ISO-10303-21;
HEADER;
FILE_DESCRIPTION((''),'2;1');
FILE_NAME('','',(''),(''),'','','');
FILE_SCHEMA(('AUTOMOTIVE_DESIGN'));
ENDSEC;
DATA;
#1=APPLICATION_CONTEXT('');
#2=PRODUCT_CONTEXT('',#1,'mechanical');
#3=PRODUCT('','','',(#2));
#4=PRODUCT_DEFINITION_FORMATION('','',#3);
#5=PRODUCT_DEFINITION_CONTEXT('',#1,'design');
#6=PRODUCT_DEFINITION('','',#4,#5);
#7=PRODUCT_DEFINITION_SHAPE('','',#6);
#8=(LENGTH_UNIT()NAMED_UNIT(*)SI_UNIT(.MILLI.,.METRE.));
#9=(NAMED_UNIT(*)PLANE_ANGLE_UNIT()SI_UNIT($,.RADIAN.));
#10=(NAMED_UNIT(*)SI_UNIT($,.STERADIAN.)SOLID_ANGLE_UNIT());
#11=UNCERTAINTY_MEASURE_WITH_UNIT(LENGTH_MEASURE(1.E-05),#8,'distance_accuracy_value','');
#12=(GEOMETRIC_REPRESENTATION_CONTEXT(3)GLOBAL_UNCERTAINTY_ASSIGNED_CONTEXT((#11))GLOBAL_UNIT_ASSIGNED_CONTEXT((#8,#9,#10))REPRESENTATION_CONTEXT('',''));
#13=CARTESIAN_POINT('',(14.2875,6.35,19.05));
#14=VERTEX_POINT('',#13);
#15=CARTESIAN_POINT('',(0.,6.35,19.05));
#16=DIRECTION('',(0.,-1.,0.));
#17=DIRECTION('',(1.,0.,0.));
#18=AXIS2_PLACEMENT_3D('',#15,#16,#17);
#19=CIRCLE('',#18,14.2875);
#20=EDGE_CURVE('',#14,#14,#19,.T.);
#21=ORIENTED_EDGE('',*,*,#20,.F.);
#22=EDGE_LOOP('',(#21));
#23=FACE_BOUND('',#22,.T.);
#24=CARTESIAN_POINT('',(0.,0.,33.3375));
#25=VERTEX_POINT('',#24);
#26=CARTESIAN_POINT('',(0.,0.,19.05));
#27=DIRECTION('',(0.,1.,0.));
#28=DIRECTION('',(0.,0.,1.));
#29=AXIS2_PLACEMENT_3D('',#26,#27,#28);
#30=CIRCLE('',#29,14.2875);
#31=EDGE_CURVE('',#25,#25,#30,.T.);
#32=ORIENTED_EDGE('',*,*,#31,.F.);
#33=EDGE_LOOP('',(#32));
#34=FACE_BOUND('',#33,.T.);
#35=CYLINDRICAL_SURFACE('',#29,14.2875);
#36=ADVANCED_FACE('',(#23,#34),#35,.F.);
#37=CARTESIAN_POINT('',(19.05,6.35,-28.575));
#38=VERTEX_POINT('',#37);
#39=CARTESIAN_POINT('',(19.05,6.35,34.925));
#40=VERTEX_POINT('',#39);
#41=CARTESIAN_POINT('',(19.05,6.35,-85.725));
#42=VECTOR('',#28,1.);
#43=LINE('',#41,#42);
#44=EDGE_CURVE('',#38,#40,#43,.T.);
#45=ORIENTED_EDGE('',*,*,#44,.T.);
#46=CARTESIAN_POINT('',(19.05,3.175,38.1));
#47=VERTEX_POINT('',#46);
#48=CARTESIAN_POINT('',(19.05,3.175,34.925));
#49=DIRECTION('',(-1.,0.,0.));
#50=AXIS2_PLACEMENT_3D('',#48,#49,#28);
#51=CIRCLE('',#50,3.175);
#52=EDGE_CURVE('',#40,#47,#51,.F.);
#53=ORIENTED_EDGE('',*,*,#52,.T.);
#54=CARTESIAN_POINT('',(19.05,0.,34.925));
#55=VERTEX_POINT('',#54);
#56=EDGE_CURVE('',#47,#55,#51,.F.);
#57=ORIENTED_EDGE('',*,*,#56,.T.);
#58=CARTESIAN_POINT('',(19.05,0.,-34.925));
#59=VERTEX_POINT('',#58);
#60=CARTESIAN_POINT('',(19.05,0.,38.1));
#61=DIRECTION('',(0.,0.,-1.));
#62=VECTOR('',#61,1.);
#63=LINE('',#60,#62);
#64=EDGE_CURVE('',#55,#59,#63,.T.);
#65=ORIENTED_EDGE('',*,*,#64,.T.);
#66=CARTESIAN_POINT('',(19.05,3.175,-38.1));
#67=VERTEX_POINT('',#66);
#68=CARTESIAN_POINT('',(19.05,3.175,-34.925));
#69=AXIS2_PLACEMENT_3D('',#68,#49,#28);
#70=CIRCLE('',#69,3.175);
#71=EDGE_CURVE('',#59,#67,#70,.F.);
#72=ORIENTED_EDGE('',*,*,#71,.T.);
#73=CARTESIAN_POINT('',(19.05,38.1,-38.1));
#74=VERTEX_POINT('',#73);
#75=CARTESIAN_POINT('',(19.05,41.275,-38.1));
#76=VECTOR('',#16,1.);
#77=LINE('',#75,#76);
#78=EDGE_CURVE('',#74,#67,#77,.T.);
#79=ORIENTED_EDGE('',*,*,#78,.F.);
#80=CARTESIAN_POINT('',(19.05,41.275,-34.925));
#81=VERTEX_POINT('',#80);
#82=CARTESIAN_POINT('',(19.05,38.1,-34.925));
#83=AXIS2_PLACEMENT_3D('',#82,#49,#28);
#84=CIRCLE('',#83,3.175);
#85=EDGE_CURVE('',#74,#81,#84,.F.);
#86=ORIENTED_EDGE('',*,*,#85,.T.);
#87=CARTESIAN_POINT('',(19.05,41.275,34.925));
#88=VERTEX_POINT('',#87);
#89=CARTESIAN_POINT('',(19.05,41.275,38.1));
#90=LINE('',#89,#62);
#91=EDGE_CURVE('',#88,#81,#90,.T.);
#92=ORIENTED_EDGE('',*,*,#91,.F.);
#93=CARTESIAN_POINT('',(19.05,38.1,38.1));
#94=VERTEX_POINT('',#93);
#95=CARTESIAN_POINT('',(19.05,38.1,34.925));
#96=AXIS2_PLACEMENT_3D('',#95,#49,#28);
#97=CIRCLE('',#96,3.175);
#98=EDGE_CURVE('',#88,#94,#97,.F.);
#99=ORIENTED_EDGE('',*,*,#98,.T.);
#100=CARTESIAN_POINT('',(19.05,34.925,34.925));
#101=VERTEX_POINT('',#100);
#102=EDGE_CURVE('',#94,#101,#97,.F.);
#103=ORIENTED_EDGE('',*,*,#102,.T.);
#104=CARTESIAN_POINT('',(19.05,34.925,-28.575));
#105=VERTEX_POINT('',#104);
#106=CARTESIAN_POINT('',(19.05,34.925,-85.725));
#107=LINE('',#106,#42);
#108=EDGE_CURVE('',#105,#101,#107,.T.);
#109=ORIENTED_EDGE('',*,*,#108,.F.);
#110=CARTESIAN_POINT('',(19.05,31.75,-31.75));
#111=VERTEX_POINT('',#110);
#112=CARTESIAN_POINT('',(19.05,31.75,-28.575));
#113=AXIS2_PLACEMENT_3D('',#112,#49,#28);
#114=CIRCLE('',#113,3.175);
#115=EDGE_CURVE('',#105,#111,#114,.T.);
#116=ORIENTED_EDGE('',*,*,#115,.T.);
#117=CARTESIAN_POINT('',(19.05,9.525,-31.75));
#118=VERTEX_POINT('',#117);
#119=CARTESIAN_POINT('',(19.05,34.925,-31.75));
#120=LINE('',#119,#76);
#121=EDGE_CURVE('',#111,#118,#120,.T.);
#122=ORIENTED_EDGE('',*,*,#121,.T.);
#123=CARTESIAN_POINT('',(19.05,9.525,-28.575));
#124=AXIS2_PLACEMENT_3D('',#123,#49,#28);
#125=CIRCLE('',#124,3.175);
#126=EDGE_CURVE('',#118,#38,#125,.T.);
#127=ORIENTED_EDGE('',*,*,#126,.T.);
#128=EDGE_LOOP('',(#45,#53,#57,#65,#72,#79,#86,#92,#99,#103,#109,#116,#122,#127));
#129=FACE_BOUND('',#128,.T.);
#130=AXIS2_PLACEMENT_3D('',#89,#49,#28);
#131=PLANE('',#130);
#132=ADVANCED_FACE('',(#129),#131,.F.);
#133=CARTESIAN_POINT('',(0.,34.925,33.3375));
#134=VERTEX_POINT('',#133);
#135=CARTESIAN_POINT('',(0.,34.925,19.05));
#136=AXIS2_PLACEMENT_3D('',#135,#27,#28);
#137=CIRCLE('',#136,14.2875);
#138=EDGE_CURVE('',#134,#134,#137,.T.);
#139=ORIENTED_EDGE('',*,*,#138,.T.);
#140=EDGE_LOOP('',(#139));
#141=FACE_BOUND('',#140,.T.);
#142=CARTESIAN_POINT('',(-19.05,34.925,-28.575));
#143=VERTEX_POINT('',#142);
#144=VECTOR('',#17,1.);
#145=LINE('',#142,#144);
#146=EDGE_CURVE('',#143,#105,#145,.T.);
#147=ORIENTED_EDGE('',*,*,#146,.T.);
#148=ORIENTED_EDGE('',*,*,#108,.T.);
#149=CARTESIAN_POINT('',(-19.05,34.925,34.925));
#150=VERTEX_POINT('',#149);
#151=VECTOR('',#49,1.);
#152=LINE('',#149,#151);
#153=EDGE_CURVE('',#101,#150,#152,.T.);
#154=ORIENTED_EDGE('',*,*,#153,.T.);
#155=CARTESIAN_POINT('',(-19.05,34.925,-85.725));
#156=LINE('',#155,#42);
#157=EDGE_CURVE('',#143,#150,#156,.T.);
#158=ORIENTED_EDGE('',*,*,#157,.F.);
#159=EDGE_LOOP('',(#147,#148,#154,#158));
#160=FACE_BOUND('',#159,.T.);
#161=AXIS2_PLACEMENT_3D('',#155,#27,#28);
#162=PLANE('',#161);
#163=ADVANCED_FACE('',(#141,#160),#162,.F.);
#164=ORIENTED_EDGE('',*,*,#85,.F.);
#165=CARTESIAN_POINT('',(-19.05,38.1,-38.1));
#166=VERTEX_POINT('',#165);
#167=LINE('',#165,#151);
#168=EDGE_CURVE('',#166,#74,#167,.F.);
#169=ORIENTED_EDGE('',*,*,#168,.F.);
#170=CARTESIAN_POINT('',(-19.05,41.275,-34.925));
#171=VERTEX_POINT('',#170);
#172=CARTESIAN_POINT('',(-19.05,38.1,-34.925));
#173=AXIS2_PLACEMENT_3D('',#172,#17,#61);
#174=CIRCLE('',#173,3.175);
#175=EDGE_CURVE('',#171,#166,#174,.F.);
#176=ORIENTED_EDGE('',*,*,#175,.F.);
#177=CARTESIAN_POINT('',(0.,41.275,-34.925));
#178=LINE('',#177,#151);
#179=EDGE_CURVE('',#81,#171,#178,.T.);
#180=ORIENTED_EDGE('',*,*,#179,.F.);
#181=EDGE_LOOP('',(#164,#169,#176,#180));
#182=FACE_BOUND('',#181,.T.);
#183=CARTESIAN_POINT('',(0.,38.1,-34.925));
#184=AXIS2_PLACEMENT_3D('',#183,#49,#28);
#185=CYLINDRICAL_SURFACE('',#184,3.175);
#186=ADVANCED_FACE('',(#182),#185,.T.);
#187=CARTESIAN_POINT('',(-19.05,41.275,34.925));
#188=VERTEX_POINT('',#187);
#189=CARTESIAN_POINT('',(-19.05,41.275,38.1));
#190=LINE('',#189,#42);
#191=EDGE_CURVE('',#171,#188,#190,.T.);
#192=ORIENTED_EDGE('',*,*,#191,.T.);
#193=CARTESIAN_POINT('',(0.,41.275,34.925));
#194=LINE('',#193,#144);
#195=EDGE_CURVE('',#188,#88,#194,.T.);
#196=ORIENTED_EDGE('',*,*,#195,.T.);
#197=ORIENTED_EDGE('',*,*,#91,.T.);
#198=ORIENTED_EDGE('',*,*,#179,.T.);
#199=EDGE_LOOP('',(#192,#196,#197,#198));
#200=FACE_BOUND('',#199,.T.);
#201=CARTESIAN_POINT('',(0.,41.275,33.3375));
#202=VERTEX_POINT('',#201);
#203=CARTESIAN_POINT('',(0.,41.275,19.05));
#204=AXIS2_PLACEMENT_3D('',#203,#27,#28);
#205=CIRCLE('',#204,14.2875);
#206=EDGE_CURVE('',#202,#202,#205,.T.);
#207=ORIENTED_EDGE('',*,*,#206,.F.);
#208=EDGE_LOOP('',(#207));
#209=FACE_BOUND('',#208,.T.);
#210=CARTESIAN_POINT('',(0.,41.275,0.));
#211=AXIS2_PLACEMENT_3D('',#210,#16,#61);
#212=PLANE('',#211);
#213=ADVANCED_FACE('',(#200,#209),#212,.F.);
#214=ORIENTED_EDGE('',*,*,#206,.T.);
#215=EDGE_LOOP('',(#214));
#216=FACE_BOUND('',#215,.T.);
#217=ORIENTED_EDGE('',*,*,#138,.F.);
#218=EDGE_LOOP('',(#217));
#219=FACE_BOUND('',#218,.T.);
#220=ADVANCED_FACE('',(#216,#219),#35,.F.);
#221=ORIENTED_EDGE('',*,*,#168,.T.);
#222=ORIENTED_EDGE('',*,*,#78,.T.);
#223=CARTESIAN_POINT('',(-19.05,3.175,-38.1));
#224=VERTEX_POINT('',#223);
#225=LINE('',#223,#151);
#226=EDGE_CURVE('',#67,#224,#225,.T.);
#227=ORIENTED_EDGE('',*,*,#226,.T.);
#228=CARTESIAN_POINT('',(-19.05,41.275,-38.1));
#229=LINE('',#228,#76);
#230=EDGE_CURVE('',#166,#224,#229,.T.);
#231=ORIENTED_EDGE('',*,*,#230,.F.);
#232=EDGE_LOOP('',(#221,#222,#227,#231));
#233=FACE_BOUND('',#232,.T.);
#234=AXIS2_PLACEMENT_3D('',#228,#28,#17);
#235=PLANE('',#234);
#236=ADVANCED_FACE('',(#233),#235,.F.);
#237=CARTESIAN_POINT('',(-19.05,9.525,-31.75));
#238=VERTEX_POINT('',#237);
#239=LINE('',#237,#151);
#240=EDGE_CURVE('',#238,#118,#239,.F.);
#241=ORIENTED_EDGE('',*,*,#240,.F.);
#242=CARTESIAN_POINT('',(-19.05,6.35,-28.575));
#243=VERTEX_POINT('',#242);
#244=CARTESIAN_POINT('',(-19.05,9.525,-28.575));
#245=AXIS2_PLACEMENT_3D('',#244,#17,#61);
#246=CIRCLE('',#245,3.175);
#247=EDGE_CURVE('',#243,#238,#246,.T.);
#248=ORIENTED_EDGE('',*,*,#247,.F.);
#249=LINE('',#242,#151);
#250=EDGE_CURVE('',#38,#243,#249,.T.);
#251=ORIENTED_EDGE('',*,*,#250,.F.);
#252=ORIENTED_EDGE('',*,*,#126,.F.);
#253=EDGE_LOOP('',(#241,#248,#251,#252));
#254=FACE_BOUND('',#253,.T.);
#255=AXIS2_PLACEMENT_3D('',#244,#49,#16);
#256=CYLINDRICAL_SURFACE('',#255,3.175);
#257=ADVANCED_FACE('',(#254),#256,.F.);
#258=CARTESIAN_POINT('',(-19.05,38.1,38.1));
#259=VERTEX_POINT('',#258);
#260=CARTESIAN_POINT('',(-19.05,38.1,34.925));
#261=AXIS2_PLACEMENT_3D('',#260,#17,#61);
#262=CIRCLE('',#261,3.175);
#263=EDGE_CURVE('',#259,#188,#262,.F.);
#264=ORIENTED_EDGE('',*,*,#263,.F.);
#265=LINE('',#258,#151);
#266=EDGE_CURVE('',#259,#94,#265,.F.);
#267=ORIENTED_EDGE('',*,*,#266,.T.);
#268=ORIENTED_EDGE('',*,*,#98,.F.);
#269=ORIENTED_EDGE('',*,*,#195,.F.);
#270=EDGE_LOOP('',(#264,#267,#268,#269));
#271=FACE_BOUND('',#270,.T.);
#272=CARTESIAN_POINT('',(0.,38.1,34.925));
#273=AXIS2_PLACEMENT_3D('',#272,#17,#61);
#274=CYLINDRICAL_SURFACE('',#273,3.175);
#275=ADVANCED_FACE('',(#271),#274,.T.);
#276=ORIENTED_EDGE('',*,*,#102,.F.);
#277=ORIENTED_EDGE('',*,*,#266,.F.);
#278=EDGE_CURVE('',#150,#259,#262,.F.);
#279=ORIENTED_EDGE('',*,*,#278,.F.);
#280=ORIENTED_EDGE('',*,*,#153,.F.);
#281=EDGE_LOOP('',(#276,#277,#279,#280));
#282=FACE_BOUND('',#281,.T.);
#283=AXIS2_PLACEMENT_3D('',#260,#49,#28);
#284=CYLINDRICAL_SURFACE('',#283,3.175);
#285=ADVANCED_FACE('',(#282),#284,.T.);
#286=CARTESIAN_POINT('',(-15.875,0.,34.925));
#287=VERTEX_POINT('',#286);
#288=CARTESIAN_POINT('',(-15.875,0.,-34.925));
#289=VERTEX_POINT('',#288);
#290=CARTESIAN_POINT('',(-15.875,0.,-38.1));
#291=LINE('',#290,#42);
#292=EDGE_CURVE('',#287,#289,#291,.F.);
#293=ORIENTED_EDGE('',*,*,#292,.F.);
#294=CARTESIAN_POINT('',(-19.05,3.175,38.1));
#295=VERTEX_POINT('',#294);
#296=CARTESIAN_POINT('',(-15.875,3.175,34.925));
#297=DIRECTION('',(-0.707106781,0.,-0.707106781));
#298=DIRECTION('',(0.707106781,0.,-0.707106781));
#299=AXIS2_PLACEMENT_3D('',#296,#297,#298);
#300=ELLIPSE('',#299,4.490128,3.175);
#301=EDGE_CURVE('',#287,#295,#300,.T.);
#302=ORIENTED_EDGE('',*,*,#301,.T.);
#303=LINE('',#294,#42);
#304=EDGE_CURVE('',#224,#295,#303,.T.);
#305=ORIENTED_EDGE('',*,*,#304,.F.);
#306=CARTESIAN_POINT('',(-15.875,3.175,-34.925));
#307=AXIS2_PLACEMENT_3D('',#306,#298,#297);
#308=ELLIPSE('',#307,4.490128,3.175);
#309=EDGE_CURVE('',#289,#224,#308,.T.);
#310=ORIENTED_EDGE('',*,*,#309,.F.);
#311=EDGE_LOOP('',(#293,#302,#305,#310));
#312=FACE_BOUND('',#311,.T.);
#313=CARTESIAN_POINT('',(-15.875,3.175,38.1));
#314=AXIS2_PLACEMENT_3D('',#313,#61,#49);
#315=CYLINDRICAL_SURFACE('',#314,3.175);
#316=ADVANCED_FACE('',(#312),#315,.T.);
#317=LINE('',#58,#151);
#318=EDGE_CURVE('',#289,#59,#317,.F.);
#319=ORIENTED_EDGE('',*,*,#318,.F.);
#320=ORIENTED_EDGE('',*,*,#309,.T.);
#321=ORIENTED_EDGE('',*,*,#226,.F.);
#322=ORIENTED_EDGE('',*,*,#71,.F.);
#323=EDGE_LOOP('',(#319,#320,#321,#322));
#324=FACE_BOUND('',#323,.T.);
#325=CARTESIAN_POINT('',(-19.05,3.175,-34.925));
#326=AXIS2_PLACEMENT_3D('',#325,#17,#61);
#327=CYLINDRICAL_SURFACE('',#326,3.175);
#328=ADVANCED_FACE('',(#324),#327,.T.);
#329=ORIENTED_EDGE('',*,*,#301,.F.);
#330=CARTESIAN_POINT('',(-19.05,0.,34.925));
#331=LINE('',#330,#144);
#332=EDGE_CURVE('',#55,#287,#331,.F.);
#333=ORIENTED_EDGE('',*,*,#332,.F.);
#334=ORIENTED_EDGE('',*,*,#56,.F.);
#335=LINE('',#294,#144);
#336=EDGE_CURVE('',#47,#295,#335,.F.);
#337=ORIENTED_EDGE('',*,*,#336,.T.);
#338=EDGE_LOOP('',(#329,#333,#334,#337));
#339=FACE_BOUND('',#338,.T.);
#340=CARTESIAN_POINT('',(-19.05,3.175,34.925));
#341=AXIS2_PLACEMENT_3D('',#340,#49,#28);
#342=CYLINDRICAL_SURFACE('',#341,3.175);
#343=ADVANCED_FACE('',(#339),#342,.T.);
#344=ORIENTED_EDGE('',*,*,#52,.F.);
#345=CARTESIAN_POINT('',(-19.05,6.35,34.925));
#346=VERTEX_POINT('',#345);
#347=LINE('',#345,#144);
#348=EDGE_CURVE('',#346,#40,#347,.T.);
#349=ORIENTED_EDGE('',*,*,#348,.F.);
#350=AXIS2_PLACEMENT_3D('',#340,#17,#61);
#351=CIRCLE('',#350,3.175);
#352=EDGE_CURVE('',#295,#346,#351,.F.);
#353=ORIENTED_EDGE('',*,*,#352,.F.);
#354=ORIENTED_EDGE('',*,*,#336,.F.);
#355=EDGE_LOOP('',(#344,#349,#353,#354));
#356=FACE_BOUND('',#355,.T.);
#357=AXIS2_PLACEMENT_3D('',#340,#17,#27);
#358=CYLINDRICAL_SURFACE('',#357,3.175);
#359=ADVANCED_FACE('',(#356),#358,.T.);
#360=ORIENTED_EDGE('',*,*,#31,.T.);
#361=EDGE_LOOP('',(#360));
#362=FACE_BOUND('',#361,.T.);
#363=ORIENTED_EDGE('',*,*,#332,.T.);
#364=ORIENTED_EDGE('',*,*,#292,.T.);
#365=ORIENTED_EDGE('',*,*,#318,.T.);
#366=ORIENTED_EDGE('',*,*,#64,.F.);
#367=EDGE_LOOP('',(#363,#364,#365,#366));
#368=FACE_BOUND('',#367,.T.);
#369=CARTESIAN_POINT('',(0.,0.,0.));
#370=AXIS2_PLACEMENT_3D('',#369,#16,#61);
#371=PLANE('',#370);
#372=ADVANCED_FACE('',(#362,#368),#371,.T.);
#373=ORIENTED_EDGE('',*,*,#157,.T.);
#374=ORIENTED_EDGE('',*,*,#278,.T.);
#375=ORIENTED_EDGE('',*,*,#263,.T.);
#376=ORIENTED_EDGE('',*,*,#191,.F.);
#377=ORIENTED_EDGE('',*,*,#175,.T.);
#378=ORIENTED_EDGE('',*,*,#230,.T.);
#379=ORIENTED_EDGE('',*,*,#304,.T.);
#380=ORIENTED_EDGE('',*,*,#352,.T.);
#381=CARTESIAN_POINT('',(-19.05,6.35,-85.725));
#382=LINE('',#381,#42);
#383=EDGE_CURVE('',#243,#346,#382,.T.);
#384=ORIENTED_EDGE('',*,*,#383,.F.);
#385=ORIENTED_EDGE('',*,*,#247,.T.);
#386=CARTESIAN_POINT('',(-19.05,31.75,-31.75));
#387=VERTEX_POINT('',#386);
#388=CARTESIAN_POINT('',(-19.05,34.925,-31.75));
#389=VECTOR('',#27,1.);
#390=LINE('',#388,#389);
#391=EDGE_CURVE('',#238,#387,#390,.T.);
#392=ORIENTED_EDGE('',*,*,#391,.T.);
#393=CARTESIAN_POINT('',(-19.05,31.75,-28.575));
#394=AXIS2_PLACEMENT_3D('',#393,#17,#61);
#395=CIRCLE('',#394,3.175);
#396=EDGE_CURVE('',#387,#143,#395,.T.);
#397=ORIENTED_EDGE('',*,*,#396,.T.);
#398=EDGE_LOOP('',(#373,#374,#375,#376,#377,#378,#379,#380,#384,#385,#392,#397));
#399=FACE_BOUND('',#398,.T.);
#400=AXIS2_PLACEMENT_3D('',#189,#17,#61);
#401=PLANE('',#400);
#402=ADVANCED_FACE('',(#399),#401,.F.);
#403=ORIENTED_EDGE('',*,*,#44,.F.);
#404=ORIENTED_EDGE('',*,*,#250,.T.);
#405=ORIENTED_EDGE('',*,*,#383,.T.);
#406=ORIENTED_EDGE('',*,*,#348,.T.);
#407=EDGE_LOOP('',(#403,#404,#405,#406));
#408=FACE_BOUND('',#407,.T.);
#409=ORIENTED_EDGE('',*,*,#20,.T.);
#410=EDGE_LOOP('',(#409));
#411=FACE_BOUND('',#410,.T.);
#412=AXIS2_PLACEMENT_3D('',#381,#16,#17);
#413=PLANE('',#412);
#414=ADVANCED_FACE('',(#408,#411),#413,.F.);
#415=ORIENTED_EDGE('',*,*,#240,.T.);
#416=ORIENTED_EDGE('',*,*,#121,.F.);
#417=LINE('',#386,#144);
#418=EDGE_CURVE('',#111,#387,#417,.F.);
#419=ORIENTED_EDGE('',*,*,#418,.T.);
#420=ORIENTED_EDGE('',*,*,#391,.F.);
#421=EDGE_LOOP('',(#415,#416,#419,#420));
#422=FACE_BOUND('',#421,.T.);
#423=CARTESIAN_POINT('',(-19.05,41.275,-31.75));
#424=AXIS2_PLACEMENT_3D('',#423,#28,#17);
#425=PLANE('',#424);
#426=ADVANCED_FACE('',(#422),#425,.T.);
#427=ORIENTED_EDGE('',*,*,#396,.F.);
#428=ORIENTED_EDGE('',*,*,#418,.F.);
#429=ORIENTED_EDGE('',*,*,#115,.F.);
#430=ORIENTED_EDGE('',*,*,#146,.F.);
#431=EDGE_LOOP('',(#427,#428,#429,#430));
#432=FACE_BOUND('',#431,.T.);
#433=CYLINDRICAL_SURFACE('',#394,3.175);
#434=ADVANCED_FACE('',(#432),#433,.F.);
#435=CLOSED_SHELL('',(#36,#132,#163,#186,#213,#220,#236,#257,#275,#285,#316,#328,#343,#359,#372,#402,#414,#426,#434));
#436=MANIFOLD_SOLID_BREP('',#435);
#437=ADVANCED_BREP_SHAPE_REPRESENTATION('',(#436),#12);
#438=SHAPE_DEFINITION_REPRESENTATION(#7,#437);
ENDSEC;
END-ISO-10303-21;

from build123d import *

# Parameters (mm, degrees)
SKETCH1_W           = 38.1
SKETCH1_H           = 76.2
BOSS_EXTRUDE1_DEPTH = 41.275
SKETCH2_W           = 38.1
SKETCH2_H           = 28.575
CUT_EXTRUDE1_DEPTH  = 69.85
SKETCH3_R           = 14.2875
CUT_EXTRUDE2_DEPTH  = 60.313894873
FILLET1_R           = 3.175


with BuildPart() as part:
    # Sketch1 → Boss-Extrude1 (new body)
    with BuildSketch(Plane(origin=(0, 0, 0), x_dir=(1, 0, 0), z_dir=(0, 1, 0))):
        Rectangle(SKETCH1_W, SKETCH1_H)
    extrude(amount=BOSS_EXTRUDE1_DEPTH)

    # Sketch2 → Cut-Extrude1 (cut)
    with BuildSketch(Plane.XY.offset(38.1)):
        with Locations((0, 20.6375)):
            Rectangle(SKETCH2_W, SKETCH2_H)
    extrude(amount=-CUT_EXTRUDE1_DEPTH, mode=Mode.SUBTRACT)

    # Sketch3 → Cut-Extrude2 (cut, through all)
    # profile 1 of 2: a face of its own
    with BuildSketch(Plane(origin=(0, 41.275, 0), x_dir=(1, 0, 0), z_dir=(0, 1, 0))):
        with Locations(Location((0, -19.05, 0), (0, 0, 270))):
            Circle(SKETCH3_R)
        Polygon((7.332348419, -19.05), (3.666174209, -12.7), (-3.666174209, -12.7), (-7.332348419, -19.05), (-3.666174209, -25.4), (3.666174209, -25.4), align=None, mode=Mode.SUBTRACT)
    # profile 2 of 2: a face of its own
    with BuildSketch(Plane(origin=(0, 41.275, 0), x_dir=(1, 0, 0), z_dir=(0, 1, 0))):
        Polygon((3.666174209, -25.4), (7.332348419, -19.05), (3.666174209, -12.7), (-3.666174209, -12.7), (-7.332348419, -19.05), (-3.666174209, -25.4), align=None)
    extrude(amount=-CUT_EXTRUDE2_DEPTH, mode=Mode.SUBTRACT)

    # Fillet1
    fillet1_edges = [part.edges().sort_by_distance(p)[0] for p in [
        (0, 41.275, 38.1),
        (0, 0, -38.1),
        (0, 0, 38.1),
        (0, 6.35, 38.1),
        (0, 6.35, -31.75),
        (0, 34.925, -31.75),
        (0, 34.925, 38.1),
        (0, 41.275, -38.1),
        (-19.05, 0, 0),
    ]]
    fillet(fillet1_edges, radius=FILLET1_R - 0.0001)  # a hair under: the kernel refuses the full size


solid = part.part
